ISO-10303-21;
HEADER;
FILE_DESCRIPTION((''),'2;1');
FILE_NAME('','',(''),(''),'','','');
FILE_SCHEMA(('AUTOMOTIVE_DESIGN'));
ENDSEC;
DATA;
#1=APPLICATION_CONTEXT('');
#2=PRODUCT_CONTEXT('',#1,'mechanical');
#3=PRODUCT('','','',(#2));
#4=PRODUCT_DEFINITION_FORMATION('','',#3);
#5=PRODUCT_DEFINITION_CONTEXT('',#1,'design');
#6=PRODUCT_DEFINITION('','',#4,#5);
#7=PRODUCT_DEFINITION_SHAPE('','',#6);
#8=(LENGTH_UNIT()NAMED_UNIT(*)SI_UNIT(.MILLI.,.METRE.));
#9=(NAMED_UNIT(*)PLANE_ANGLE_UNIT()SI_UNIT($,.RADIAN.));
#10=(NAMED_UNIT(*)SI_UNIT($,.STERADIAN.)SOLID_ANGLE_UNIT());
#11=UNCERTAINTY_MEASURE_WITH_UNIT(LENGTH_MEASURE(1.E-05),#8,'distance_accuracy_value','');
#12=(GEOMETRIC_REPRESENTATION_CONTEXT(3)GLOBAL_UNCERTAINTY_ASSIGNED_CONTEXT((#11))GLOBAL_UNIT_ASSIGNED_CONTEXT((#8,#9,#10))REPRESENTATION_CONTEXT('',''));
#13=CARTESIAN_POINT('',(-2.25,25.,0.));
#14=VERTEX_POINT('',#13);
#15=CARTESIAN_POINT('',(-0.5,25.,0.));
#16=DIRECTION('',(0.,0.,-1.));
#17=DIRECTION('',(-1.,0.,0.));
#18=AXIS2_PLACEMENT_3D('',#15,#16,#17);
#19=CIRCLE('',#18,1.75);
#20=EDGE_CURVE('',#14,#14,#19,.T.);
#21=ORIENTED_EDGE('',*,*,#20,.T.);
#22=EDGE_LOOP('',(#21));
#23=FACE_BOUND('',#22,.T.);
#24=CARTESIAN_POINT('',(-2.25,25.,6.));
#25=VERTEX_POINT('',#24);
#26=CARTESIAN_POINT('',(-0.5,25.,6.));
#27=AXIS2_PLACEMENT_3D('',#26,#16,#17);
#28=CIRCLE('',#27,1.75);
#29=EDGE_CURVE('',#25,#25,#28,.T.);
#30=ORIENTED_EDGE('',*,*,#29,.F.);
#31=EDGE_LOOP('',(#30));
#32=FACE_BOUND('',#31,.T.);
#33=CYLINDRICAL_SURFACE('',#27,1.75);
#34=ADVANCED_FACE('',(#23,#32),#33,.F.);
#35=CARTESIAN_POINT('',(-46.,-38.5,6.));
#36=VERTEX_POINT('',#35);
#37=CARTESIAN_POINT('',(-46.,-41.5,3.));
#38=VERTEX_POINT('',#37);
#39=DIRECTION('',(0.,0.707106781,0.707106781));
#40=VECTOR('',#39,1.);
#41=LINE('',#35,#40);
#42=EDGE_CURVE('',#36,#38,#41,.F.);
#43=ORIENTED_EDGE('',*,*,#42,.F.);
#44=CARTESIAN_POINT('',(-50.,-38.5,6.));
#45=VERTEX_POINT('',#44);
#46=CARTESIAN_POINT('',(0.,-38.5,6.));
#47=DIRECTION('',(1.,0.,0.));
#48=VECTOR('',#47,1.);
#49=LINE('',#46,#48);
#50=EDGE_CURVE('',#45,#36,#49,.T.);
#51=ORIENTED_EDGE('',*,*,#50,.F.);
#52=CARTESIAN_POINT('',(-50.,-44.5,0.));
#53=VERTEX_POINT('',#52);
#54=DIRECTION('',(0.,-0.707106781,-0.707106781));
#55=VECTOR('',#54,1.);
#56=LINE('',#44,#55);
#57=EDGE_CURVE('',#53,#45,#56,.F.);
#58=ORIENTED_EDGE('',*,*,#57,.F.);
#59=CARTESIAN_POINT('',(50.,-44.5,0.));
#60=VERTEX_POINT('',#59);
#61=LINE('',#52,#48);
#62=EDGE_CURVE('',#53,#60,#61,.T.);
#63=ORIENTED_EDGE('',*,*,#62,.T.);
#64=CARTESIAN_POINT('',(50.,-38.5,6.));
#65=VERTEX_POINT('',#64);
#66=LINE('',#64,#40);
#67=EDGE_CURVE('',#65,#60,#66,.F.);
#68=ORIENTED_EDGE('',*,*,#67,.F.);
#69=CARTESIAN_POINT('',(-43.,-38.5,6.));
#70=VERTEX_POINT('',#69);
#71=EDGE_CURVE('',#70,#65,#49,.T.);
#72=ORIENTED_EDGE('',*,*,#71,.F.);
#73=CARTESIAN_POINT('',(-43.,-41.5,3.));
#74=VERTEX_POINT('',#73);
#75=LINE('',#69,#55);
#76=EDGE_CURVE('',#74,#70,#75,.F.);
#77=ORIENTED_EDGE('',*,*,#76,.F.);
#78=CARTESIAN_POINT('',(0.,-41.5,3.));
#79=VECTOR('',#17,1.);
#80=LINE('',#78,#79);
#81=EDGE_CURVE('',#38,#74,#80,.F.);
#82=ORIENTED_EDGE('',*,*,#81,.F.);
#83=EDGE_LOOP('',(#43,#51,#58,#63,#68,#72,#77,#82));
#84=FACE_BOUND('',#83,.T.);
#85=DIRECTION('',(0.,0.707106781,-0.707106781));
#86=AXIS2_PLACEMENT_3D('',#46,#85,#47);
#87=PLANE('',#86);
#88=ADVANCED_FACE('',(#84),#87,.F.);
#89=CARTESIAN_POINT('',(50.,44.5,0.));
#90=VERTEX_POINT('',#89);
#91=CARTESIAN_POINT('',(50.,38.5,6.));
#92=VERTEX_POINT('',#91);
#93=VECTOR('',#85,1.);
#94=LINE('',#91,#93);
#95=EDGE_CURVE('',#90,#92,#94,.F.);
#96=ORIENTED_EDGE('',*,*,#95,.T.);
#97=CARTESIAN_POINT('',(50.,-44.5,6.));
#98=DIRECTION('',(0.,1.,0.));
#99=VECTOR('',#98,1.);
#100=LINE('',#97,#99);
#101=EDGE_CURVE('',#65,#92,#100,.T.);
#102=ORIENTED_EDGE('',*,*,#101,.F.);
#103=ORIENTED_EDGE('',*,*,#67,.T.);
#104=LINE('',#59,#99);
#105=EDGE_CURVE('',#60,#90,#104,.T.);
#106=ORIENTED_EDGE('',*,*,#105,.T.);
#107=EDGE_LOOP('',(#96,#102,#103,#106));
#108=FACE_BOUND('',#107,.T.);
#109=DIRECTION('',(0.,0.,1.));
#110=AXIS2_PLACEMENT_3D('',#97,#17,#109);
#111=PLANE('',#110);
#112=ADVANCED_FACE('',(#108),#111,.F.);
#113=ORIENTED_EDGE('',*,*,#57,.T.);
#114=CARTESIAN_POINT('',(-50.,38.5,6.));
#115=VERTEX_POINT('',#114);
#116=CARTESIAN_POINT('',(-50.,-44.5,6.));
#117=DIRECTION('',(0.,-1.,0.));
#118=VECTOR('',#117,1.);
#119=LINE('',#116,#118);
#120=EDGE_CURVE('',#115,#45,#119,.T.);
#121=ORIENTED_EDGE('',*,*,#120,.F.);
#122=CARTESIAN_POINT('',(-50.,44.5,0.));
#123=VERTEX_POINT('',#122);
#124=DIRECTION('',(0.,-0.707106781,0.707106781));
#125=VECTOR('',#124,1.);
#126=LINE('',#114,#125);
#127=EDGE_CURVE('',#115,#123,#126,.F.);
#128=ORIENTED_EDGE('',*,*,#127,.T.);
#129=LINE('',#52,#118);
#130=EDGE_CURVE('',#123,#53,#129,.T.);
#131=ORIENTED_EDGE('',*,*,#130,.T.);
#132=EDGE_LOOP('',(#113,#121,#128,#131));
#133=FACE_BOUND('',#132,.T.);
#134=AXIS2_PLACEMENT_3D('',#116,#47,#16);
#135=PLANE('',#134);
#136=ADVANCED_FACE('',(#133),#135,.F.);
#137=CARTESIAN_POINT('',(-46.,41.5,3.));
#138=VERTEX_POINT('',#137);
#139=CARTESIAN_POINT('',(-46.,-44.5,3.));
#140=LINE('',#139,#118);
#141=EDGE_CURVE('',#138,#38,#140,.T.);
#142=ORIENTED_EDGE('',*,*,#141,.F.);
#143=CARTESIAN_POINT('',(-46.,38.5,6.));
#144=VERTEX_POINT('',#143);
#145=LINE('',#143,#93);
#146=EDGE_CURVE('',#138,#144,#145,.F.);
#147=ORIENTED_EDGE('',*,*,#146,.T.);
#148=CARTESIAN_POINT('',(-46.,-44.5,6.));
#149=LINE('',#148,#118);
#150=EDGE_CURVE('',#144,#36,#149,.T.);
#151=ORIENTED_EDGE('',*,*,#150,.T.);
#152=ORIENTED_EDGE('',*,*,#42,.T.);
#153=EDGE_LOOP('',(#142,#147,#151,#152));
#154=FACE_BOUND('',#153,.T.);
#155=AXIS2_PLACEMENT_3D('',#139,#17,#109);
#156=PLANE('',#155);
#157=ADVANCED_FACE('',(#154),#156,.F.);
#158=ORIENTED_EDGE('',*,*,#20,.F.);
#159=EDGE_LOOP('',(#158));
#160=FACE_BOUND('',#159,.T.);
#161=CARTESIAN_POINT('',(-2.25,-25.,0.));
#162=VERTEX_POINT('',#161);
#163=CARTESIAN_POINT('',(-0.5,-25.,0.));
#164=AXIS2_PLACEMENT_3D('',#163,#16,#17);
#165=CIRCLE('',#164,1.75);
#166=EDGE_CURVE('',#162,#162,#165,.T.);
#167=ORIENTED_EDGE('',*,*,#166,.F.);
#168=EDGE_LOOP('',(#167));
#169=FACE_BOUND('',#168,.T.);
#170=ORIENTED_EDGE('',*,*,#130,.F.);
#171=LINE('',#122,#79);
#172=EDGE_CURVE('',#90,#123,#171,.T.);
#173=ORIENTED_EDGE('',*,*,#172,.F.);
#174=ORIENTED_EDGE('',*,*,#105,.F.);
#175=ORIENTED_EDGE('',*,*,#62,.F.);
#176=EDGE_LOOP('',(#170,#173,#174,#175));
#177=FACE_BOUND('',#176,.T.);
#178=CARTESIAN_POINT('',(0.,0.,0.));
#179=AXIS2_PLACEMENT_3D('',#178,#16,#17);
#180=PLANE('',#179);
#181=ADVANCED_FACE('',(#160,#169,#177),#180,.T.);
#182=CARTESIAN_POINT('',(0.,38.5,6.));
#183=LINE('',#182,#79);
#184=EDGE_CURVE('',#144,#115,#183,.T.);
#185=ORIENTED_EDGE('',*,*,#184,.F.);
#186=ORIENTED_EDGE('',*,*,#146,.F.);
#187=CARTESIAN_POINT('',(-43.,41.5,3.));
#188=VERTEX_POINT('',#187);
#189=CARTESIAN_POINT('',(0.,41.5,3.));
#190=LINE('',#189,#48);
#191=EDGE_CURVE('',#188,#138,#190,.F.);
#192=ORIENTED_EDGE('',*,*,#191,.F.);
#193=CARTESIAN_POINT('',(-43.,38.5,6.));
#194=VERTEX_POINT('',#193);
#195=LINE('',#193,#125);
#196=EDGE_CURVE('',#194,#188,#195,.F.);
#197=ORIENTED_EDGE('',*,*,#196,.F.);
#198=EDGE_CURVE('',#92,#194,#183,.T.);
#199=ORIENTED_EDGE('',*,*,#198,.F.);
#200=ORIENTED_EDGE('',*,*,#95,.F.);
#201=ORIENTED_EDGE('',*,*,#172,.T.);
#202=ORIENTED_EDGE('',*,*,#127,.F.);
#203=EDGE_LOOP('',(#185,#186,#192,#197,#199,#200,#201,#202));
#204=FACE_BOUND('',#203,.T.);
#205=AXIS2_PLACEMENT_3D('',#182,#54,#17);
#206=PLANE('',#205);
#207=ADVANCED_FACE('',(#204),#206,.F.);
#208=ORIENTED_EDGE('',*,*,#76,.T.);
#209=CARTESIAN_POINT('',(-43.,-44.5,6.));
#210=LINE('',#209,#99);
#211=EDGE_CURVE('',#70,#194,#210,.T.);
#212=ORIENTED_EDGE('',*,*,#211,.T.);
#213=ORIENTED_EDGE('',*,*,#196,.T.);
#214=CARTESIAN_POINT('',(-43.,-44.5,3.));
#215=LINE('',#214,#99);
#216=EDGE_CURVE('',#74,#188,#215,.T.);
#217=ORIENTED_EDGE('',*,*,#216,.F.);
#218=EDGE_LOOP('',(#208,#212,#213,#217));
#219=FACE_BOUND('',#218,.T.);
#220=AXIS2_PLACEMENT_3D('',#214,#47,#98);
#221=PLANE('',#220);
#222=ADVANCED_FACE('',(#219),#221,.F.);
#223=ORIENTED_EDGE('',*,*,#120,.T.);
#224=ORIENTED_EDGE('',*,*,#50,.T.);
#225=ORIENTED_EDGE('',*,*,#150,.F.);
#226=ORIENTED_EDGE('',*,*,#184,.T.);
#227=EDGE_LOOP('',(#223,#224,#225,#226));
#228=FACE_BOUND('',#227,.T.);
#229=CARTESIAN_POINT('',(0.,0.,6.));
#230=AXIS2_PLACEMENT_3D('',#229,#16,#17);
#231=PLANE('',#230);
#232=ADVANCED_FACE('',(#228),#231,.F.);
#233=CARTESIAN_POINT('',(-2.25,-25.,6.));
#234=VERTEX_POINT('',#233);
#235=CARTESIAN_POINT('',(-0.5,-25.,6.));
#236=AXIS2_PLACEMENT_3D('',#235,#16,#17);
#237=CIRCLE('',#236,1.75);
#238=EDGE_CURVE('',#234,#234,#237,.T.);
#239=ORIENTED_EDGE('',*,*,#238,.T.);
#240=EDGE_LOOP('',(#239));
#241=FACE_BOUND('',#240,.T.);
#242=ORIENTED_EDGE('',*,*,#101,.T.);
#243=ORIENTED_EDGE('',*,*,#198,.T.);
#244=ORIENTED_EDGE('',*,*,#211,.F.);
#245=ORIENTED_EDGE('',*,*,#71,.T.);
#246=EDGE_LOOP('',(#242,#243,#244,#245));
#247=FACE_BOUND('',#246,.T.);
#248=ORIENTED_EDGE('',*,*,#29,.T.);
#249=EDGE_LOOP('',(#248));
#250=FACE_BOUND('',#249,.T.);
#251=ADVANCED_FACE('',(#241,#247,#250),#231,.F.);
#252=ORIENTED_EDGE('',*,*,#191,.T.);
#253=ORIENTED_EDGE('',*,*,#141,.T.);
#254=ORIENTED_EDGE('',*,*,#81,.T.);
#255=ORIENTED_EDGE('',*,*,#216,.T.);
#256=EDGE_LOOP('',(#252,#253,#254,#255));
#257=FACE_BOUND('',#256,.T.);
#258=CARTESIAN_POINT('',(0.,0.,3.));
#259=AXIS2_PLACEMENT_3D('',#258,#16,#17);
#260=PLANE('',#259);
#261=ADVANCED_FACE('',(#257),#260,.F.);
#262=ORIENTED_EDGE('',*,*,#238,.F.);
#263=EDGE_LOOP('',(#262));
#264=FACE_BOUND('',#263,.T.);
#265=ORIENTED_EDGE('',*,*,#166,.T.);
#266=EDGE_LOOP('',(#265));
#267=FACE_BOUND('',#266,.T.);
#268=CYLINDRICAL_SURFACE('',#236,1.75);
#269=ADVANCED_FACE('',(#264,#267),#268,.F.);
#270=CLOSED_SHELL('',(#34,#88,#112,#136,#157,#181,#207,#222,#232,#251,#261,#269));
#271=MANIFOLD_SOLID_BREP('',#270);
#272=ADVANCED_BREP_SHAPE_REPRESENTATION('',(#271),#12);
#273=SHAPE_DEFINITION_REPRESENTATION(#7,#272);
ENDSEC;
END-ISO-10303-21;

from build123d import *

# Parameters (mm, degrees)
SKETCH1_W           = 100
SKETCH1_H           = 89
BOSS_EXTRUDE1_DEPTH = 6
CHAMFER1_SIZE       = 6
SKETCH2_W           = 3
SKETCH2_H           = 89
CUT_EXTRUDE1_DEPTH  = 3
SKETCH4_R           = 1.75
CUT_EXTRUDE3_DEPTH  = 68.203050526


with BuildPart() as part:
    # Sketch1 → Boss-Extrude1 (new body)
    with BuildSketch(Plane.XY):
        Rectangle(SKETCH1_W, SKETCH1_H)
    extrude(amount=BOSS_EXTRUDE1_DEPTH)

    # Chamfer1
    chamfer1_edges = [part.edges().sort_by_distance(p)[0] for p in [
        (0, -44.5, 6),
        (0, 44.5, 6),
    ]]
    chamfer(chamfer1_edges, length=CHAMFER1_SIZE - 0.0001)  # a hair under: the kernel refuses the full size

    # Sketch2 → Cut-Extrude1 (cut)
    with BuildSketch(Plane.XY.offset(6)):
        with Locations((-44.5, 0)):
            Rectangle(SKETCH2_W, SKETCH2_H)
    extrude(amount=-CUT_EXTRUDE1_DEPTH, mode=Mode.SUBTRACT)

    # Sketch4 → Cut-Extrude3 (cut, through all)
    with BuildSketch(Plane(origin=(0, 0, 0), x_dir=(-1, 0, 0), z_dir=(0, 0, -1))):
        with Locations((0.5, 25)):
            Circle(SKETCH4_R)
        with Locations((0.5, -25)):
            Circle(SKETCH4_R)
    extrude(amount=-CUT_EXTRUDE3_DEPTH, mode=Mode.SUBTRACT)


solid = part.part
